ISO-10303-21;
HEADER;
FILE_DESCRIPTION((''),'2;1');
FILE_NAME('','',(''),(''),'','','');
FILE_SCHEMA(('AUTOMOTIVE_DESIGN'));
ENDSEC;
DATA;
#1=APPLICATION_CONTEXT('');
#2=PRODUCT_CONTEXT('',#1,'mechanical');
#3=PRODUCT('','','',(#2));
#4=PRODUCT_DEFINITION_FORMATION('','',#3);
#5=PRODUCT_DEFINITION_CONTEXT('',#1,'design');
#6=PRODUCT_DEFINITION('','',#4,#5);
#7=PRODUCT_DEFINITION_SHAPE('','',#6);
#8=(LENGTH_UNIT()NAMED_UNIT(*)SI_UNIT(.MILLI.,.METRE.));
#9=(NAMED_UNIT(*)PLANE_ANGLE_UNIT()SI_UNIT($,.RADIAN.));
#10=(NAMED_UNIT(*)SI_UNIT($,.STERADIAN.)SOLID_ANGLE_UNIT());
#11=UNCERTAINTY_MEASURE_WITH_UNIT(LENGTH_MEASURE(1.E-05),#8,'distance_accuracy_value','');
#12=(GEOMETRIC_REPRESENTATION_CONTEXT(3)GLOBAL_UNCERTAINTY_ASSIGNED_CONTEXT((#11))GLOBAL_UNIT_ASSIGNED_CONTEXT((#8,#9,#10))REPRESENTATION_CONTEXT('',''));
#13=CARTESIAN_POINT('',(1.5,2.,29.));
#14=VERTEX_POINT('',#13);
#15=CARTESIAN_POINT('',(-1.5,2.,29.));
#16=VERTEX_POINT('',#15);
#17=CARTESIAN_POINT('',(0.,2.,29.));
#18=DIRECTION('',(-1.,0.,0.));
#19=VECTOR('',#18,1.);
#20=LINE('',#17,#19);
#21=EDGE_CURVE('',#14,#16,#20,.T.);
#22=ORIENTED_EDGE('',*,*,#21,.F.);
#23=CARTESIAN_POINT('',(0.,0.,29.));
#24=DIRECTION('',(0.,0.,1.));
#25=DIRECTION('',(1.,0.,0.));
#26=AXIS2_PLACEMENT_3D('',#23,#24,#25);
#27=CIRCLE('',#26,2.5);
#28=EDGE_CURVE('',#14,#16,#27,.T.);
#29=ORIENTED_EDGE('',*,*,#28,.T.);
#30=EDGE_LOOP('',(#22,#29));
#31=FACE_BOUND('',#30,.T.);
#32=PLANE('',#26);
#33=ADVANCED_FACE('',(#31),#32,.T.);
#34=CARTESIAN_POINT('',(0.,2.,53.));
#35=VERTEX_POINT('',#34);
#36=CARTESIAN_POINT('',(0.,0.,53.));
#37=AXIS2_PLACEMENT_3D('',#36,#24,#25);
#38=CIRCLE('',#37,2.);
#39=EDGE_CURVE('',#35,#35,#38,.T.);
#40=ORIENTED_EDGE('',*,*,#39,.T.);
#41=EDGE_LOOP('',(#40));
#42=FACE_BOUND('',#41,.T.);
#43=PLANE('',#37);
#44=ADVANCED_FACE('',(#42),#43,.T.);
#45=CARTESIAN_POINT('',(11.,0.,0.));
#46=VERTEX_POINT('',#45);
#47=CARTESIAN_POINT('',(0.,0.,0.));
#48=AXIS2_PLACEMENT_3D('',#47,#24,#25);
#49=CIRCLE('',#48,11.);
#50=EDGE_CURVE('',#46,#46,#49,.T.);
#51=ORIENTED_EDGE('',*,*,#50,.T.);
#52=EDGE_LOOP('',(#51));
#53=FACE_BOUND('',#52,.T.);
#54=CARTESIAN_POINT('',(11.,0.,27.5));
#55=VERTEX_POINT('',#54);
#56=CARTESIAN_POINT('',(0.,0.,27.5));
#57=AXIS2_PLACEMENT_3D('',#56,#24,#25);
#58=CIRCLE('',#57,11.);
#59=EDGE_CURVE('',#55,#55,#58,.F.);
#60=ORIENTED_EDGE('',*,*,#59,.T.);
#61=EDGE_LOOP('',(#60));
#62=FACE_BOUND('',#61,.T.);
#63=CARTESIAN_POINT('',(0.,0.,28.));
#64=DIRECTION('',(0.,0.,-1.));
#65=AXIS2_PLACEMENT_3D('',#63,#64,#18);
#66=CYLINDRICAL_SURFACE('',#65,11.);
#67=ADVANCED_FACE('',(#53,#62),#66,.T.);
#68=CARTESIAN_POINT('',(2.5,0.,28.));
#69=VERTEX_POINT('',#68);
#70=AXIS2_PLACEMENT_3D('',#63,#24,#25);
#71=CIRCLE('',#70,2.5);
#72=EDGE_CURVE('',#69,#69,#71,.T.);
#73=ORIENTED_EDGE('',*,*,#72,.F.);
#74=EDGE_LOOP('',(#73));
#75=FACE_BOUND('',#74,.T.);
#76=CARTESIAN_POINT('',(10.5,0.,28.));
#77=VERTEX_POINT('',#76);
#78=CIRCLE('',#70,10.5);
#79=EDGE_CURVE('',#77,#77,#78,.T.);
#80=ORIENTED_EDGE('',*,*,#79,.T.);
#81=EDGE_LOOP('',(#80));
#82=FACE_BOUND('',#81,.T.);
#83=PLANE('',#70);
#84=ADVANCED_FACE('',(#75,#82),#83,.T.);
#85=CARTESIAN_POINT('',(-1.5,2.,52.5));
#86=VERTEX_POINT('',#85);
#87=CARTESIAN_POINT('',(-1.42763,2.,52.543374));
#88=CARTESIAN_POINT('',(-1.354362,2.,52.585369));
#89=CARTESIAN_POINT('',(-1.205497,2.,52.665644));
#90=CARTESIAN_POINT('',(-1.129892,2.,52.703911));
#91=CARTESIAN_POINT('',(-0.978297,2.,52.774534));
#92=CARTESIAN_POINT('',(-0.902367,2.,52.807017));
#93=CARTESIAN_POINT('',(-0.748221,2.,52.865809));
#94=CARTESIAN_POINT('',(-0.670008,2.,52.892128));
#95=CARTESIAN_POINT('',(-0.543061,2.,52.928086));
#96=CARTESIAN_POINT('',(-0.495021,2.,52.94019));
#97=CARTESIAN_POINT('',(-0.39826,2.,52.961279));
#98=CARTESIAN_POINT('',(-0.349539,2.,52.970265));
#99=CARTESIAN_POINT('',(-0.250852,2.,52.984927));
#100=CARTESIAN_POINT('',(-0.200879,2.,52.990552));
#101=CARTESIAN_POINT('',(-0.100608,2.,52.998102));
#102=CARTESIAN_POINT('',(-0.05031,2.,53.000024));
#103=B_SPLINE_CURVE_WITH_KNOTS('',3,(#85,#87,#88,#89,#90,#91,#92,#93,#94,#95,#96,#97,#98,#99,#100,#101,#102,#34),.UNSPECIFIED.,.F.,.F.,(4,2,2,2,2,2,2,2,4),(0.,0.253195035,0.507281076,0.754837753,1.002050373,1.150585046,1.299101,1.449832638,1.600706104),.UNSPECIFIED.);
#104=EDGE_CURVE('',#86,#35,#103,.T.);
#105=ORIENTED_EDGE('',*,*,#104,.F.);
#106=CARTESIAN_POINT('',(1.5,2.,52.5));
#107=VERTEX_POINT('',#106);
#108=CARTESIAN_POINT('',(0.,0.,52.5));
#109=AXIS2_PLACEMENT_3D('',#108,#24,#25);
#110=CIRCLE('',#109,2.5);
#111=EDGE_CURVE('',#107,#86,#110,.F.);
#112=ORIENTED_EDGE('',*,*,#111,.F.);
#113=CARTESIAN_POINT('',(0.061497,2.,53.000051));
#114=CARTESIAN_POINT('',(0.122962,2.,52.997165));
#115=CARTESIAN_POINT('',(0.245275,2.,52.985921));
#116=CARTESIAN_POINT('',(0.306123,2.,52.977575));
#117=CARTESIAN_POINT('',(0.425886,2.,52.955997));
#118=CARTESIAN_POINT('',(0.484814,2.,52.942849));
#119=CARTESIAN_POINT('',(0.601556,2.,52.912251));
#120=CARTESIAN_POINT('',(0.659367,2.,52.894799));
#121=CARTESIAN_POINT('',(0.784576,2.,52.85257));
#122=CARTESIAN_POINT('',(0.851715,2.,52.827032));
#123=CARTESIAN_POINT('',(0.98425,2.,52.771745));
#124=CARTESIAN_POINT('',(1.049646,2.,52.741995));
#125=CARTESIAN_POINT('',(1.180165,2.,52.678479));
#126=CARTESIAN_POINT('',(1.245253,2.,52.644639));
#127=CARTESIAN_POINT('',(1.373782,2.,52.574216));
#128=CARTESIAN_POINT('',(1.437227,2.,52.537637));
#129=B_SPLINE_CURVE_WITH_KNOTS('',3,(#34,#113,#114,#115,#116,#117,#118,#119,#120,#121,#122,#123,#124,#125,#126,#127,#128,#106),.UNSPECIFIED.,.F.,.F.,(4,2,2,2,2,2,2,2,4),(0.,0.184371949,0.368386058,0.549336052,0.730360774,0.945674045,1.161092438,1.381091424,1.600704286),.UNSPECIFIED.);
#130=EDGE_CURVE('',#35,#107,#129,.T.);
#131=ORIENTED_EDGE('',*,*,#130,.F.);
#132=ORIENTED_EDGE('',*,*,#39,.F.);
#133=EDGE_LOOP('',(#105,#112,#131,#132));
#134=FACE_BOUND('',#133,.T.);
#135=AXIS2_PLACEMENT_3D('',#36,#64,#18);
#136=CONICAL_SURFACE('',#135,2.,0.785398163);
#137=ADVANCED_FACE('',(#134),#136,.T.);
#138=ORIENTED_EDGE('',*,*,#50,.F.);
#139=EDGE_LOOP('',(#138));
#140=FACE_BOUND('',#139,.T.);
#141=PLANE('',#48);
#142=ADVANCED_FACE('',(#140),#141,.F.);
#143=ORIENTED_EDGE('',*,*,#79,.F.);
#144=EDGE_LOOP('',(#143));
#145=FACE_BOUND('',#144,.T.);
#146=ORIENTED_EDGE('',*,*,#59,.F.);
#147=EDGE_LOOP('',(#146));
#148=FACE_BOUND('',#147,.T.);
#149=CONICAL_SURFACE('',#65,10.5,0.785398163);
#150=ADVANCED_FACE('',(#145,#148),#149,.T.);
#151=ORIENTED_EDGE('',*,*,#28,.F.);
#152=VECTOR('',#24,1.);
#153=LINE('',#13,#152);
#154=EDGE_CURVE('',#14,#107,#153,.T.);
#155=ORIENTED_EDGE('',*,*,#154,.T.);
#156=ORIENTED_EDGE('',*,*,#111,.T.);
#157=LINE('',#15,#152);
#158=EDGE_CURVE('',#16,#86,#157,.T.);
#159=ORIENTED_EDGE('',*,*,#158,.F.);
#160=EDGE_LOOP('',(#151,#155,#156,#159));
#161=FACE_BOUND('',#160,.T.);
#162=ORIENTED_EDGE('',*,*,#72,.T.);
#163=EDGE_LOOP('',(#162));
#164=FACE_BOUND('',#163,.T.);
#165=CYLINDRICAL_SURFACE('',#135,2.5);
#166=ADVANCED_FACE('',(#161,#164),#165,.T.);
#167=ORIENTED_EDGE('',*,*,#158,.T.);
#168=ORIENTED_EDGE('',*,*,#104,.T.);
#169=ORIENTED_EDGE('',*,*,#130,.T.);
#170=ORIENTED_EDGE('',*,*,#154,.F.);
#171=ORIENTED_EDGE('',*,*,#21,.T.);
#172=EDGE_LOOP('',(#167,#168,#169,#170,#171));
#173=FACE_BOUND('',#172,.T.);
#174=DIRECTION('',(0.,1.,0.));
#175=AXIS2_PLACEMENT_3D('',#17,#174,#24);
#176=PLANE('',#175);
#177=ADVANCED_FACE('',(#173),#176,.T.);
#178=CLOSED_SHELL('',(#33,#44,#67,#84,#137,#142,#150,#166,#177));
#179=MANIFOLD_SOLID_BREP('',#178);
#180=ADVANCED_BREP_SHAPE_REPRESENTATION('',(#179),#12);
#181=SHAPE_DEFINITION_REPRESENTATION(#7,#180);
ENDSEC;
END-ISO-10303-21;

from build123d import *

# Parameters (mm, degrees)
SKETCH1_R           = 11
SKETCH1_R_2         = 2.5
BOSS_EXTRUDE1_DEPTH = 28
BOSS_EXTRUDE2_START = 28
BOSS_EXTRUDE2_DEPTH = 25
CUT_EXTRUDE1_START  = 29
CUT_EXTRUDE1_DEPTH  = 24
CHAMFER1_SIZE       = 0.5


with BuildPart() as part:
    # Sketch1 → Boss-Extrude1 (new body)
    # profile 1 of 5: a face of its own
    with BuildSketch(Plane.XY):
        Circle(SKETCH1_R)
        Circle(SKETCH1_R_2, mode=Mode.SUBTRACT)
    # profile 2 of 5: a face of its own
    with BuildSketch(Plane.XY):
        with BuildLine():
            ThreePointArc((1.5, 2), (0, 2.5), (-1.5, 2))
            Line((-1.5, 2), (1.5, 2))
        make_face()
    # profile 3 of 5: a face of its own
    with BuildSketch(Plane.XY):
        with BuildLine():
            Line((1.5, 2), (-1.5, 2))
            ThreePointArc((-1.5, 2), (-1.118033989, -2.236067977), (2.5, 0))
            ThreePointArc((2.5, 0), (2.236067977, 1.118033989), (1.5, 2))
        make_face()
    # profile 4 of 5: a face of its own
    with BuildSketch(Plane.XY):
        with BuildLine():
            ThreePointArc((1.5, 2), (0, 2.5), (-1.5, 2))
            Line((-1.5, 2), (1.5, 2))
        make_face()
    # profile 5 of 5: a face of its own
    with BuildSketch(Plane.XY):
        with BuildLine():
            Line((1.5, 2), (-1.5, 2))
            ThreePointArc((-1.5, 2), (-1.118033989, -2.236067977), (2.5, 0))
            ThreePointArc((2.5, 0), (2.236067977, 1.118033989), (1.5, 2))
        make_face()
    extrude(amount=BOSS_EXTRUDE1_DEPTH)

    # Sketch1<3> → Boss-Extrude2 (add)
    with BuildSketch(Plane.XY.offset(BOSS_EXTRUDE2_START)):
        with BuildLine():
            ThreePointArc((1.5, 2), (0, 2.5), (-1.5, 2))
            Line((-1.5, 2), (1.5, 2))
        make_face()
        with BuildLine():
            Line((1.5, 2), (-1.5, 2))
            ThreePointArc((-1.5, 2), (-1.118033989, -2.236067977), (2.5, 0))
            ThreePointArc((2.5, 0), (2.236067977, 1.118033989), (1.5, 2))
        make_face()
    extrude(amount=BOSS_EXTRUDE2_DEPTH)

    # Sketch1<4> → Cut-Extrude1 (cut)
    with BuildSketch(Plane.XY.offset(CUT_EXTRUDE1_START)):
        with BuildLine():
            ThreePointArc((1.5, 2), (0, 2.5), (-1.5, 2))
            Line((-1.5, 2), (1.5, 2))
        make_face()
    extrude(amount=CUT_EXTRUDE1_DEPTH, mode=Mode.SUBTRACT)

    # Chamfer1
    chamfer1_edges = [part.edges().sort_by_distance(p)[0] for p in [
        (-11, 0, 28),
        (-1.118033989, -2.236067977, 53),
    ]]
    chamfer(chamfer1_edges, length=CHAMFER1_SIZE - 0.0001)  # a hair under: the kernel refuses the full size


solid = part.part
